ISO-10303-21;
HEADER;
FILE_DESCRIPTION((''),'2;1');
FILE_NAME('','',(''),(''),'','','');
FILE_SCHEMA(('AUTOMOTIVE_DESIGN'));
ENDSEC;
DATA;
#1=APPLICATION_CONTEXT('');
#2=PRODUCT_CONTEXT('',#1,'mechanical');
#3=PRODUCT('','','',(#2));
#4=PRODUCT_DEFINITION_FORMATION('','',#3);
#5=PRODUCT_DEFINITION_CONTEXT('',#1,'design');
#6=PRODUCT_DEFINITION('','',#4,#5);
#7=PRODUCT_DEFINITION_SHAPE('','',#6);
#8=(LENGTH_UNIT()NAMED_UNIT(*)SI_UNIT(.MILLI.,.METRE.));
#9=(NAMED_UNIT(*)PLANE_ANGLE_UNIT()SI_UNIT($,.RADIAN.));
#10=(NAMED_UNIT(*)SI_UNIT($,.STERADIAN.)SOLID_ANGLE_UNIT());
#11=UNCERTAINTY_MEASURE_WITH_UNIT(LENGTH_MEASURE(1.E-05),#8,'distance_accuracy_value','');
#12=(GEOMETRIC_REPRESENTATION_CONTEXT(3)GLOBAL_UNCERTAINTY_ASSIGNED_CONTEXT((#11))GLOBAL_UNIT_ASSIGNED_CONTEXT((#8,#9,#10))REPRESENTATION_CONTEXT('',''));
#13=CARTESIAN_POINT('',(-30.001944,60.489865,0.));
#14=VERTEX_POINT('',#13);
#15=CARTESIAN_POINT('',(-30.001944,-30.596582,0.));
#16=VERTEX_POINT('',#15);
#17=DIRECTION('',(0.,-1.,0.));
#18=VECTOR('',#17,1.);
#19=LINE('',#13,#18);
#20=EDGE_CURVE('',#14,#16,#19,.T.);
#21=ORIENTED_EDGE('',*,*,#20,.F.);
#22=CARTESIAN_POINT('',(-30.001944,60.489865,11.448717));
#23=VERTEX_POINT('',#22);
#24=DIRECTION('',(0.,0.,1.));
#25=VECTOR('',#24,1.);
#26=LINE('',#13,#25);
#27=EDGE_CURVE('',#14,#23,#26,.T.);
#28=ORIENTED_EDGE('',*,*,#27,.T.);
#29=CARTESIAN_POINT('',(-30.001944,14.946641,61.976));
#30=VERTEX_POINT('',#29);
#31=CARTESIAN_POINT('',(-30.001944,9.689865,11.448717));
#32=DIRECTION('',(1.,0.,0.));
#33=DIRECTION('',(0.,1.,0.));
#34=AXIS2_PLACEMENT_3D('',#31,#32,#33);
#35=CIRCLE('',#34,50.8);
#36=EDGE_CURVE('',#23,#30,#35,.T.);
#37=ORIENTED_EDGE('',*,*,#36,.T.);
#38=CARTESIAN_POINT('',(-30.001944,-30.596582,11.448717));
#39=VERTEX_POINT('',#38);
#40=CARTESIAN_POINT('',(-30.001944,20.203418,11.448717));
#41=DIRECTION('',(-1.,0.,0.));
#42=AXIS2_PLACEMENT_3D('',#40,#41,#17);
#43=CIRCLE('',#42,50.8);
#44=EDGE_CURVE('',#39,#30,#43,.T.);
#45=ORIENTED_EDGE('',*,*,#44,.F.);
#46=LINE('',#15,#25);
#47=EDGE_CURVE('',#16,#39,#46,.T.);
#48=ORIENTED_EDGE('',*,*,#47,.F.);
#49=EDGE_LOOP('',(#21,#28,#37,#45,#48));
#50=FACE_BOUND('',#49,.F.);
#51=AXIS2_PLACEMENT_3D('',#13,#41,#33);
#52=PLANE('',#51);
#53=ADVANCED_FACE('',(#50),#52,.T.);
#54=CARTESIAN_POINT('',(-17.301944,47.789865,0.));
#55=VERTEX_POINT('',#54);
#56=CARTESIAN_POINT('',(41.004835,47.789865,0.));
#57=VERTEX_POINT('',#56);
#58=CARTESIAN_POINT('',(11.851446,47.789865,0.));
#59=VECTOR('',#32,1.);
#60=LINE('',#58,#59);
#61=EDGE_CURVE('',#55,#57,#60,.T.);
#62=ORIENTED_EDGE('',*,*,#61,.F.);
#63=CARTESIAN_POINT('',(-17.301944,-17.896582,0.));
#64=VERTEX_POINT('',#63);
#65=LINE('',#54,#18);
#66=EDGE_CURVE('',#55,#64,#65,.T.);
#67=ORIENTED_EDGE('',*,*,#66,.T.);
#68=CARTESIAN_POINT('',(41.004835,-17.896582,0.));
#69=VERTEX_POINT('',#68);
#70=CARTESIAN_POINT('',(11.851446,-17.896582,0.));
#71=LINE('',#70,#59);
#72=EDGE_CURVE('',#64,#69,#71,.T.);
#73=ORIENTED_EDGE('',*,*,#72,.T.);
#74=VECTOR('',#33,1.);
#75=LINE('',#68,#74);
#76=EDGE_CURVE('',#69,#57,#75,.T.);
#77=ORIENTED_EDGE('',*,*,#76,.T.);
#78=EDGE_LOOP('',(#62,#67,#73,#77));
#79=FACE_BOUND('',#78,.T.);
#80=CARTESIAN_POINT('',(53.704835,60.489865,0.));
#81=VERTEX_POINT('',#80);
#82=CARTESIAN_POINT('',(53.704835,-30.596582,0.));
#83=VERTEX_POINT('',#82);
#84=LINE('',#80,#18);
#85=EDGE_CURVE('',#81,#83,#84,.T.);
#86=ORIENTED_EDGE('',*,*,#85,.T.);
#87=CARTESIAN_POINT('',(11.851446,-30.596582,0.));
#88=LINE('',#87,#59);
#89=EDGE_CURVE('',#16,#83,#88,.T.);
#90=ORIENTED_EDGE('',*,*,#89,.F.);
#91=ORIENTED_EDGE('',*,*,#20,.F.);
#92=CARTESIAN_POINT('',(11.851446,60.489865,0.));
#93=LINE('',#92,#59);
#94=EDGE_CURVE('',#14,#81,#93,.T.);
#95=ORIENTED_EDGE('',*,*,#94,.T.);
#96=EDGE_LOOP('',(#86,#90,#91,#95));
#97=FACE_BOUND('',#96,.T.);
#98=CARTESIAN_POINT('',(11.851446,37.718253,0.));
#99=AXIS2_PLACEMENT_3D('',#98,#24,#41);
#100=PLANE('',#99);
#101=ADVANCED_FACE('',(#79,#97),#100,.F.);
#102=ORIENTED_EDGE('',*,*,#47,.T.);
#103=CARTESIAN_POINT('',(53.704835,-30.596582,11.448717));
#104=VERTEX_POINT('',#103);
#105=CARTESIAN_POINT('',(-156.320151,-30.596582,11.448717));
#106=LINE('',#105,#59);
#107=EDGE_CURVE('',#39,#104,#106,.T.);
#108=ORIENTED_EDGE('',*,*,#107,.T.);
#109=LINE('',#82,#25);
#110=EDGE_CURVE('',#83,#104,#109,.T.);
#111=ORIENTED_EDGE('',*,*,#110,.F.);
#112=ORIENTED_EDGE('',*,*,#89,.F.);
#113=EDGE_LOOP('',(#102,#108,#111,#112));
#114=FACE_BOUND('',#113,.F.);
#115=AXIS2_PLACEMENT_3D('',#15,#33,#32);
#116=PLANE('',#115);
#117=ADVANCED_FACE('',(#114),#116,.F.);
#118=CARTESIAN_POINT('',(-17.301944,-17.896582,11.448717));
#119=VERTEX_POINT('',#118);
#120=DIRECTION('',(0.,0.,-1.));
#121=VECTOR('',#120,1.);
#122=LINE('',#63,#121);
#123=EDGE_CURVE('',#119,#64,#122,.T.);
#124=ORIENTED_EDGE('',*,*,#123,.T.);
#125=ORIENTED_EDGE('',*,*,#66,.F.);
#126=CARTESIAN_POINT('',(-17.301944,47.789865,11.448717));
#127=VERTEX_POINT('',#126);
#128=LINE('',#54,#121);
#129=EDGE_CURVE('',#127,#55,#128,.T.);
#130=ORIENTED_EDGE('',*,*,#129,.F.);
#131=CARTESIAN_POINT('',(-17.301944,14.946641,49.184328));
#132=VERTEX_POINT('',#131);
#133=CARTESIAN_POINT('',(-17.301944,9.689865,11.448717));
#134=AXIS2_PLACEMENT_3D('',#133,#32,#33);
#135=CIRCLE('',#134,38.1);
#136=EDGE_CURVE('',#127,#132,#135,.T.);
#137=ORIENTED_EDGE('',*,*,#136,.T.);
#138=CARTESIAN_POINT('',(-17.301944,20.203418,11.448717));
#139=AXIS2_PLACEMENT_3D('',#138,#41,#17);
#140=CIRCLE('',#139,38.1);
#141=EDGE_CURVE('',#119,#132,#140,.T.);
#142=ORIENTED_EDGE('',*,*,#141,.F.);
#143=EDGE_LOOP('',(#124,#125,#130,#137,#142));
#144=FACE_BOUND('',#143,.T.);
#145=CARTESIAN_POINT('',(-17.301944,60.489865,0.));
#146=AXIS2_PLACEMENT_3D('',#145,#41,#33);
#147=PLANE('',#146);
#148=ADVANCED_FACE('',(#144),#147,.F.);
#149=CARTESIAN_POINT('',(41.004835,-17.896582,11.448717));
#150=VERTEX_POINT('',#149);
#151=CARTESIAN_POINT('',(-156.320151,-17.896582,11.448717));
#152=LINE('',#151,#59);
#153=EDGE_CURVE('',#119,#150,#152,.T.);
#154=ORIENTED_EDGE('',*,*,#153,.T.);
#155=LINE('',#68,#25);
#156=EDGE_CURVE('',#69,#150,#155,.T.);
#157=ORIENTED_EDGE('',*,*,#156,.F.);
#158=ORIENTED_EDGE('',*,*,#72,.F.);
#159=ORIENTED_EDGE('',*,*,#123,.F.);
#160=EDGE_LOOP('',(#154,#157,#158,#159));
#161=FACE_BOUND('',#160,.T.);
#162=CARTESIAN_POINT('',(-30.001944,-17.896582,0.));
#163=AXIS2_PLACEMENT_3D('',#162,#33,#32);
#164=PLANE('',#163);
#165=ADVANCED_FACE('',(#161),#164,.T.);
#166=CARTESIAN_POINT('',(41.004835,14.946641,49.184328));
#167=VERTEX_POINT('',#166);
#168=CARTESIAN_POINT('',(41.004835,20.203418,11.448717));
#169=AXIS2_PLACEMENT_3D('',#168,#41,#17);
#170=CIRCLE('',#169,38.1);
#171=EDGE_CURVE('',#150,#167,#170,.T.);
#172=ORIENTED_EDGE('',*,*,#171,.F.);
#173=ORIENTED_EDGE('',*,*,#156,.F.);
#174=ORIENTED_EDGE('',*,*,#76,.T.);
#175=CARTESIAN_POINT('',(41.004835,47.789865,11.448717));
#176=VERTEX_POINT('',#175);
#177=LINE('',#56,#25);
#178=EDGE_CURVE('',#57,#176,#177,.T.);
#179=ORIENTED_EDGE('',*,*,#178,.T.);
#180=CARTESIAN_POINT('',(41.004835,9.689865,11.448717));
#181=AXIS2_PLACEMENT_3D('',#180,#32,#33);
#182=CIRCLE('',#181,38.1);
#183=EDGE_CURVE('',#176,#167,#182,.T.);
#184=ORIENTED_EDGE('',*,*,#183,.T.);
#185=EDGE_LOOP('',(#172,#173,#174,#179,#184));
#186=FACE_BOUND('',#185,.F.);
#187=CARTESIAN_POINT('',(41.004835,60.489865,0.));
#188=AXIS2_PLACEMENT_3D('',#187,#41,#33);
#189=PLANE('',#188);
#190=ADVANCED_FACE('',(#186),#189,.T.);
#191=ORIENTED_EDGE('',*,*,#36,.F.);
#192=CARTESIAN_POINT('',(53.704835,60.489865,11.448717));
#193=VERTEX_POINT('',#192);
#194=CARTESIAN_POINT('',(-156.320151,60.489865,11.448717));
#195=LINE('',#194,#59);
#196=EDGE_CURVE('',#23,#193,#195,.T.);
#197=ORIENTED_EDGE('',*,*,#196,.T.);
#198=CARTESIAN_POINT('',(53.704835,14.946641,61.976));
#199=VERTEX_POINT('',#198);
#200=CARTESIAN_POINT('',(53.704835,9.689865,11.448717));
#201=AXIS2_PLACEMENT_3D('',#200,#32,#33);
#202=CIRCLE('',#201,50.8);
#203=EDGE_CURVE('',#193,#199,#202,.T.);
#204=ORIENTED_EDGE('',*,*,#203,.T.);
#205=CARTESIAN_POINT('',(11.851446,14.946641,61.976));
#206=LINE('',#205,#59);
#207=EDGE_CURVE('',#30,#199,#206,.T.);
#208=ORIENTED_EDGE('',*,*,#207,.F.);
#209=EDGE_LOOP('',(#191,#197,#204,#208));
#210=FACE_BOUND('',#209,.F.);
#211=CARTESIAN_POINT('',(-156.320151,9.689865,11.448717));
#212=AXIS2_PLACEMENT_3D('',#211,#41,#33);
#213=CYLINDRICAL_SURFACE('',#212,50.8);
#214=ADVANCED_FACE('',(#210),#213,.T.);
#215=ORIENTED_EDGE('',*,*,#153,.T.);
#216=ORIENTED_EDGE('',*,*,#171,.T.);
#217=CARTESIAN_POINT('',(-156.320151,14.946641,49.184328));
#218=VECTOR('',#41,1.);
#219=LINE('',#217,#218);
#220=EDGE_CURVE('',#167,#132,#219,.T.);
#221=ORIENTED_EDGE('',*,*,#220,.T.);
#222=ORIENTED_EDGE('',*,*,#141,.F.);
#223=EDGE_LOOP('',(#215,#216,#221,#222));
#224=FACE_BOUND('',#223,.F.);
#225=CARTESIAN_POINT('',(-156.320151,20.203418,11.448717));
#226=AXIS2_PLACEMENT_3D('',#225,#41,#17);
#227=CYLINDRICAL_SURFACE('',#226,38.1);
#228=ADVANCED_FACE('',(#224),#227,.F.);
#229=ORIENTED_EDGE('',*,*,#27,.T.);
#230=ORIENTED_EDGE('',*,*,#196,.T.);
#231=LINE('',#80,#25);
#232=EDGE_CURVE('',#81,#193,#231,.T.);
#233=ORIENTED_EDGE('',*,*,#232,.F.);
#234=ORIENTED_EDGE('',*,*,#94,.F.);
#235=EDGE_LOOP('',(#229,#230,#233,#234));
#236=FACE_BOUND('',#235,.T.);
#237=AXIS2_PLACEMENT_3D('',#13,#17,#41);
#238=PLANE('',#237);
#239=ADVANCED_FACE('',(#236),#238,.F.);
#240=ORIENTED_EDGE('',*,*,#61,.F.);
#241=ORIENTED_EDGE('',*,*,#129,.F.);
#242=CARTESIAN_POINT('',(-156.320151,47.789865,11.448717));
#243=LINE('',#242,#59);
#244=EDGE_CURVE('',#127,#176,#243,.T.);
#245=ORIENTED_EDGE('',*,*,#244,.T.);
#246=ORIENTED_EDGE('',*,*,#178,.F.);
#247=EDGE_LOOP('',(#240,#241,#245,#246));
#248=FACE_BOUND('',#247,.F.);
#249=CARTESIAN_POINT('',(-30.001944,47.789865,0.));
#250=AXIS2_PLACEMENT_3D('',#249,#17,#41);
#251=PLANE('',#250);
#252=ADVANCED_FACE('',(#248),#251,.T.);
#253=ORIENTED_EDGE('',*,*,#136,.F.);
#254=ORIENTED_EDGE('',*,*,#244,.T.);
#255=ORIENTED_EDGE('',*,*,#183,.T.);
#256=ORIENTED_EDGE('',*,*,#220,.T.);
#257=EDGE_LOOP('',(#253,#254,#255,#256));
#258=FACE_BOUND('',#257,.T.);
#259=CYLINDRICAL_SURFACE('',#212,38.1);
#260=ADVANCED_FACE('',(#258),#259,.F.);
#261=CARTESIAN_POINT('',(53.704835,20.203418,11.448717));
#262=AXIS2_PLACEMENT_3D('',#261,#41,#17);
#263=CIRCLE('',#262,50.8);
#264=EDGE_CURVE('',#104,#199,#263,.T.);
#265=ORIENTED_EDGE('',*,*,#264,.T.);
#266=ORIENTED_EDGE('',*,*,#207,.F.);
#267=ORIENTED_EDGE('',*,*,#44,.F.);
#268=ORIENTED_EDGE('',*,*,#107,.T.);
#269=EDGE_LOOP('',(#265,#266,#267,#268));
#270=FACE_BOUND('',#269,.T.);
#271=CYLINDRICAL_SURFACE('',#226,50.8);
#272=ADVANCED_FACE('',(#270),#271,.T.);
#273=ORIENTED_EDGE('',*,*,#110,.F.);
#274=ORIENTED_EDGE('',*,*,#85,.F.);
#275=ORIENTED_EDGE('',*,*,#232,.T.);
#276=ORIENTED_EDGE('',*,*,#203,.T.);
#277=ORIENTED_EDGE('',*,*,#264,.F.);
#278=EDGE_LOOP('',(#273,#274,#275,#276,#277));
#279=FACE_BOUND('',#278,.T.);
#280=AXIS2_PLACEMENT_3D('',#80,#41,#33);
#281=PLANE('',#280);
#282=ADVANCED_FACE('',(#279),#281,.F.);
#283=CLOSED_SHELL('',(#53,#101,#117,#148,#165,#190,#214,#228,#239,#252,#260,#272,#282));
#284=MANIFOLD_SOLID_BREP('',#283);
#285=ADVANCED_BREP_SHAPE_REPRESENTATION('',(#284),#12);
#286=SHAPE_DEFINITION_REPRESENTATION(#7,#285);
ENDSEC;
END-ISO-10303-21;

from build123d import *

# Parameters (mm, degrees)
F0_W        = 83.7067794055
F0_H        = 45.5432236195
F1_DEPTH    = 61.976
F2_T1_DEPTH = 336.3431931548
F3_T        = -12.7


# Not quite as in the source:
# - a fillet or chamfer that OpenCascade refuses, or shapes differently, is made with other operations: its cross-section is extruded or revolved along the edge and cut away or added


with BuildPart() as f1:
    # F0 (on Top) → F1 (new body)
    with BuildSketch(Plane.XY):
        with Locations((11.8514457718, -7.8249704093)):
            Rectangle(F0_W, F0_H)
    extrude(amount=F1_DEPTH)

    # F2: fillet of radius 50.8 on 1 edges, made by hand

    # F2_s2 → F2_t1 (cut)
    with BuildSketch(Plane.YZ.offset(-156.3201508057)):
        with BuildLine():
            ThreePointArc((-30.596582219, 11.4487172501), (-17.5304147843, 45.4604487546), (14.9466414005, 61.976))
            Line((14.9466414005, 61.976), (-30.596582219, 61.976))
            Line((-30.596582219, 61.976), (-30.596582219, 11.4487172501))
        make_face()
    extrude(amount=F2_T1_DEPTH, mode=Mode.SUBTRACT)

    # F3
    f3_openings = [f1.faces().sort_by_distance(p)[0] for p in [
        (11.851446, 14.946641, 30.988),
        (11.851446, -7.82497, 0),
    ]]
    offset(amount=F3_T, openings=f3_openings)

    # F4: F1 across face


with BuildPart() as f1_1:
    add(f1.part)
    add(f1.part.mirror(Plane(origin=(11.8514457718, 14.9466414005, 38.893861799), x_dir=(-1, 0, 0), z_dir=(0, 1, 0))))


solid = f1_1.part
